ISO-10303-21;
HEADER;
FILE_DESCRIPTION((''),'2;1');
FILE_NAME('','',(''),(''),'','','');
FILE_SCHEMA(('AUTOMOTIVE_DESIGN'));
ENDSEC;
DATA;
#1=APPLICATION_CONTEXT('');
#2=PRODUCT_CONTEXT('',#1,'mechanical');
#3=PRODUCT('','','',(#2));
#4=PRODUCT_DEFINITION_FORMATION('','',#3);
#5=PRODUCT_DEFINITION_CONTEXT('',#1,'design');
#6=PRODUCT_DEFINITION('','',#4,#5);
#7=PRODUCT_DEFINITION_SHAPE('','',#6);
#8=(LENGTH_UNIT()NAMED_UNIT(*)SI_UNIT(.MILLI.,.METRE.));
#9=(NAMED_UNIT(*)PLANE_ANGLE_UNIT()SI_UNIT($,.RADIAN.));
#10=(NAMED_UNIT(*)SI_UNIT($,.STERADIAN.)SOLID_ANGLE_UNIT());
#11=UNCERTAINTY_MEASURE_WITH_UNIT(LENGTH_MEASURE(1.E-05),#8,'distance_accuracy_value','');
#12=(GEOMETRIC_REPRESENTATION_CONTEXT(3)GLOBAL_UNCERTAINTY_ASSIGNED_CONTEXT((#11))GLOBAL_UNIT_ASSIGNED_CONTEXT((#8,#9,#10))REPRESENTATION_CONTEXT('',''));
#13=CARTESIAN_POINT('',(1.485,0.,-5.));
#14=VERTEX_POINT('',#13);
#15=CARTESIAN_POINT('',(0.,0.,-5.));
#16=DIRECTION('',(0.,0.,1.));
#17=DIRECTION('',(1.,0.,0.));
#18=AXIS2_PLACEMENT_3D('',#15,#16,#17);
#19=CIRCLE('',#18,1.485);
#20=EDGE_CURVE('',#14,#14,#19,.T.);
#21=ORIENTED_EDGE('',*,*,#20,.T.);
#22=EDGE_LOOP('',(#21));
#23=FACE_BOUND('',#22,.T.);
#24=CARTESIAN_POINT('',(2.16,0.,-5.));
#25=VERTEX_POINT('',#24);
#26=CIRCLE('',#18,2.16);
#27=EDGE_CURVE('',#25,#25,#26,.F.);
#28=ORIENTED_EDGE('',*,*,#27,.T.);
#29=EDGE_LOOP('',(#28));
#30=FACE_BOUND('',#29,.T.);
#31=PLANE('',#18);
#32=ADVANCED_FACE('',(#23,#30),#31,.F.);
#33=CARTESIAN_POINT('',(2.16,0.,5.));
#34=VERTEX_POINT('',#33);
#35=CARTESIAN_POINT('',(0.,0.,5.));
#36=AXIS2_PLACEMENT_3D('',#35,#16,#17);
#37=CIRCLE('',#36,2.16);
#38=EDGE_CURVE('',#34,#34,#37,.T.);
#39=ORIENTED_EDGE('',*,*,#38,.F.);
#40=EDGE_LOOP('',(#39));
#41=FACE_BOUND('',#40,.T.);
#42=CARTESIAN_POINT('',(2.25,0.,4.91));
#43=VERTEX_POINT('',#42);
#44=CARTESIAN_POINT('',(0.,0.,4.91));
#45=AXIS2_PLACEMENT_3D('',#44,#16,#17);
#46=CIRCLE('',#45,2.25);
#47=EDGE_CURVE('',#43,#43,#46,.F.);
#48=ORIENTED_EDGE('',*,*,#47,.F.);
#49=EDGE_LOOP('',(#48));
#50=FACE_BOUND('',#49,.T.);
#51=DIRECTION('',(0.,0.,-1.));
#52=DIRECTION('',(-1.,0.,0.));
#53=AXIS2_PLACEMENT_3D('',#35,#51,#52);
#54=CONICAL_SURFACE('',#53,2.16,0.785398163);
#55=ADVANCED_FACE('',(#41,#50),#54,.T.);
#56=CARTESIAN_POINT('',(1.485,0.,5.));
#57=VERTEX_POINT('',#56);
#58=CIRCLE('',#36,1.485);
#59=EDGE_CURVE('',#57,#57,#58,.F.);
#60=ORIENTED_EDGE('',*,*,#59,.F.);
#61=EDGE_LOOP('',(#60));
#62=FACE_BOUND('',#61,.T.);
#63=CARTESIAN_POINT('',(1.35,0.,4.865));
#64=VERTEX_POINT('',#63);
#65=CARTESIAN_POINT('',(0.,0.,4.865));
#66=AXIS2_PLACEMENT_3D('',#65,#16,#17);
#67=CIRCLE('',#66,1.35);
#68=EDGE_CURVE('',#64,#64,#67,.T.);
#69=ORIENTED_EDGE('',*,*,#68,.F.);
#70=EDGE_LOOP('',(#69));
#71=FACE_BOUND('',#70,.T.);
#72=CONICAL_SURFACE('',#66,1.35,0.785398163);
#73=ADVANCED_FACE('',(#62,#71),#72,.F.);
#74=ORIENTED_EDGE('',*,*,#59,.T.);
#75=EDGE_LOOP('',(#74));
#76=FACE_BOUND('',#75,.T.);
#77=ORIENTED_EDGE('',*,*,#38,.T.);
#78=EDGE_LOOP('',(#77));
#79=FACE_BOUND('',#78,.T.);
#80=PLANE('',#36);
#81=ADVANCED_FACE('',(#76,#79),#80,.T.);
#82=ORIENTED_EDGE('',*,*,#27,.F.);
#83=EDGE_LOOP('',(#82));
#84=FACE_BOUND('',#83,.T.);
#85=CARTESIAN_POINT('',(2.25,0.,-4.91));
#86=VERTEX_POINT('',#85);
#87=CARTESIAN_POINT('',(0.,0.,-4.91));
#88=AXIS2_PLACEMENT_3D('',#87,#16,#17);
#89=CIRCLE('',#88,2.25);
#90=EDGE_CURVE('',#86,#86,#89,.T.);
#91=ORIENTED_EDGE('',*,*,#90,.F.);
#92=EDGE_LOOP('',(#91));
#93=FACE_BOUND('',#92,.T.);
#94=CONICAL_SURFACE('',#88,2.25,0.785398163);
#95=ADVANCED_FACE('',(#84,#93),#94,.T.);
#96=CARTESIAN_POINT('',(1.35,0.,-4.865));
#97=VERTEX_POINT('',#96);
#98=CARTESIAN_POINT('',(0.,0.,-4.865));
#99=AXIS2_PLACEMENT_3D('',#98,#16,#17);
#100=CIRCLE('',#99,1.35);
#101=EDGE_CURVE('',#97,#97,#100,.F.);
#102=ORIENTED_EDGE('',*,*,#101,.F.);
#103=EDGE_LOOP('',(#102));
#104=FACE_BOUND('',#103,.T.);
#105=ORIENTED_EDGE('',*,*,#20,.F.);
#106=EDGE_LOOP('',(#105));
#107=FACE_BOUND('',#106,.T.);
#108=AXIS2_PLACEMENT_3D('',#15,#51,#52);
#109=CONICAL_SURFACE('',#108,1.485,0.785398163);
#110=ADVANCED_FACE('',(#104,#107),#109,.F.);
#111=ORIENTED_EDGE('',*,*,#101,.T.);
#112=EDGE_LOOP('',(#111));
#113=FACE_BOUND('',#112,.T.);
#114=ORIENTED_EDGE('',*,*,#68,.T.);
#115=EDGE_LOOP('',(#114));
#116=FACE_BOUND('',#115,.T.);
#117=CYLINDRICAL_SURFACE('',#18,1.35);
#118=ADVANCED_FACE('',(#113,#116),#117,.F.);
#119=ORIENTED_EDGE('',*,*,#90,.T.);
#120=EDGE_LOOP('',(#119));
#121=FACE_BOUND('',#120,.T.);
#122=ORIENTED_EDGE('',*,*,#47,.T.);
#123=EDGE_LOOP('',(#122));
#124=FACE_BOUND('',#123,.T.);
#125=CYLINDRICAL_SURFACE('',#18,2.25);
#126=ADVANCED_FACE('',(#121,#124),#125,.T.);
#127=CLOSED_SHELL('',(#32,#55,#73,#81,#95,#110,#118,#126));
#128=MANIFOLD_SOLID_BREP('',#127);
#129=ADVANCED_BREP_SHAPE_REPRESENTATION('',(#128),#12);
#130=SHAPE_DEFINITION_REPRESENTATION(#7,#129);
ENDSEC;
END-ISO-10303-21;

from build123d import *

# Parameters (mm, degrees)
BOSS_EXTRUDE1_DEPTH      = 5
BOSS_EXTRUDE1_DEPTH_BACK = 5
SKETCH3_R                = 2.25
SKETCH3_R_2              = 1.35
CHAMFER1_SIZE            = 0.09
CHAMFER2_SIZE            = 0.135


with BuildPart() as part:
    # Sketch3 → Boss-Extrude1 (new, two sides: drawn at the far end of the back side and taken through both)
    with BuildSketch(Plane.XY.offset(-BOSS_EXTRUDE1_DEPTH_BACK)):
        Circle(SKETCH3_R)
        Circle(SKETCH3_R_2, mode=Mode.SUBTRACT)
    extrude(amount=BOSS_EXTRUDE1_DEPTH + BOSS_EXTRUDE1_DEPTH_BACK)

    # Chamfer1
    chamfer1_edges = [part.edges().sort_by_distance(p)[0] for p in [
        (-2.25, 0, -5),
        (-2.25, 0, 5),
    ]]
    chamfer(chamfer1_edges, length=CHAMFER1_SIZE)

    # Chamfer2
    chamfer2_edges = [part.edges().sort_by_distance(p)[0] for p in [
        (-1.35, 0, -5),
        (-1.35, 0, 5),
    ]]
    chamfer(chamfer2_edges, length=CHAMFER2_SIZE)


solid = part.part
